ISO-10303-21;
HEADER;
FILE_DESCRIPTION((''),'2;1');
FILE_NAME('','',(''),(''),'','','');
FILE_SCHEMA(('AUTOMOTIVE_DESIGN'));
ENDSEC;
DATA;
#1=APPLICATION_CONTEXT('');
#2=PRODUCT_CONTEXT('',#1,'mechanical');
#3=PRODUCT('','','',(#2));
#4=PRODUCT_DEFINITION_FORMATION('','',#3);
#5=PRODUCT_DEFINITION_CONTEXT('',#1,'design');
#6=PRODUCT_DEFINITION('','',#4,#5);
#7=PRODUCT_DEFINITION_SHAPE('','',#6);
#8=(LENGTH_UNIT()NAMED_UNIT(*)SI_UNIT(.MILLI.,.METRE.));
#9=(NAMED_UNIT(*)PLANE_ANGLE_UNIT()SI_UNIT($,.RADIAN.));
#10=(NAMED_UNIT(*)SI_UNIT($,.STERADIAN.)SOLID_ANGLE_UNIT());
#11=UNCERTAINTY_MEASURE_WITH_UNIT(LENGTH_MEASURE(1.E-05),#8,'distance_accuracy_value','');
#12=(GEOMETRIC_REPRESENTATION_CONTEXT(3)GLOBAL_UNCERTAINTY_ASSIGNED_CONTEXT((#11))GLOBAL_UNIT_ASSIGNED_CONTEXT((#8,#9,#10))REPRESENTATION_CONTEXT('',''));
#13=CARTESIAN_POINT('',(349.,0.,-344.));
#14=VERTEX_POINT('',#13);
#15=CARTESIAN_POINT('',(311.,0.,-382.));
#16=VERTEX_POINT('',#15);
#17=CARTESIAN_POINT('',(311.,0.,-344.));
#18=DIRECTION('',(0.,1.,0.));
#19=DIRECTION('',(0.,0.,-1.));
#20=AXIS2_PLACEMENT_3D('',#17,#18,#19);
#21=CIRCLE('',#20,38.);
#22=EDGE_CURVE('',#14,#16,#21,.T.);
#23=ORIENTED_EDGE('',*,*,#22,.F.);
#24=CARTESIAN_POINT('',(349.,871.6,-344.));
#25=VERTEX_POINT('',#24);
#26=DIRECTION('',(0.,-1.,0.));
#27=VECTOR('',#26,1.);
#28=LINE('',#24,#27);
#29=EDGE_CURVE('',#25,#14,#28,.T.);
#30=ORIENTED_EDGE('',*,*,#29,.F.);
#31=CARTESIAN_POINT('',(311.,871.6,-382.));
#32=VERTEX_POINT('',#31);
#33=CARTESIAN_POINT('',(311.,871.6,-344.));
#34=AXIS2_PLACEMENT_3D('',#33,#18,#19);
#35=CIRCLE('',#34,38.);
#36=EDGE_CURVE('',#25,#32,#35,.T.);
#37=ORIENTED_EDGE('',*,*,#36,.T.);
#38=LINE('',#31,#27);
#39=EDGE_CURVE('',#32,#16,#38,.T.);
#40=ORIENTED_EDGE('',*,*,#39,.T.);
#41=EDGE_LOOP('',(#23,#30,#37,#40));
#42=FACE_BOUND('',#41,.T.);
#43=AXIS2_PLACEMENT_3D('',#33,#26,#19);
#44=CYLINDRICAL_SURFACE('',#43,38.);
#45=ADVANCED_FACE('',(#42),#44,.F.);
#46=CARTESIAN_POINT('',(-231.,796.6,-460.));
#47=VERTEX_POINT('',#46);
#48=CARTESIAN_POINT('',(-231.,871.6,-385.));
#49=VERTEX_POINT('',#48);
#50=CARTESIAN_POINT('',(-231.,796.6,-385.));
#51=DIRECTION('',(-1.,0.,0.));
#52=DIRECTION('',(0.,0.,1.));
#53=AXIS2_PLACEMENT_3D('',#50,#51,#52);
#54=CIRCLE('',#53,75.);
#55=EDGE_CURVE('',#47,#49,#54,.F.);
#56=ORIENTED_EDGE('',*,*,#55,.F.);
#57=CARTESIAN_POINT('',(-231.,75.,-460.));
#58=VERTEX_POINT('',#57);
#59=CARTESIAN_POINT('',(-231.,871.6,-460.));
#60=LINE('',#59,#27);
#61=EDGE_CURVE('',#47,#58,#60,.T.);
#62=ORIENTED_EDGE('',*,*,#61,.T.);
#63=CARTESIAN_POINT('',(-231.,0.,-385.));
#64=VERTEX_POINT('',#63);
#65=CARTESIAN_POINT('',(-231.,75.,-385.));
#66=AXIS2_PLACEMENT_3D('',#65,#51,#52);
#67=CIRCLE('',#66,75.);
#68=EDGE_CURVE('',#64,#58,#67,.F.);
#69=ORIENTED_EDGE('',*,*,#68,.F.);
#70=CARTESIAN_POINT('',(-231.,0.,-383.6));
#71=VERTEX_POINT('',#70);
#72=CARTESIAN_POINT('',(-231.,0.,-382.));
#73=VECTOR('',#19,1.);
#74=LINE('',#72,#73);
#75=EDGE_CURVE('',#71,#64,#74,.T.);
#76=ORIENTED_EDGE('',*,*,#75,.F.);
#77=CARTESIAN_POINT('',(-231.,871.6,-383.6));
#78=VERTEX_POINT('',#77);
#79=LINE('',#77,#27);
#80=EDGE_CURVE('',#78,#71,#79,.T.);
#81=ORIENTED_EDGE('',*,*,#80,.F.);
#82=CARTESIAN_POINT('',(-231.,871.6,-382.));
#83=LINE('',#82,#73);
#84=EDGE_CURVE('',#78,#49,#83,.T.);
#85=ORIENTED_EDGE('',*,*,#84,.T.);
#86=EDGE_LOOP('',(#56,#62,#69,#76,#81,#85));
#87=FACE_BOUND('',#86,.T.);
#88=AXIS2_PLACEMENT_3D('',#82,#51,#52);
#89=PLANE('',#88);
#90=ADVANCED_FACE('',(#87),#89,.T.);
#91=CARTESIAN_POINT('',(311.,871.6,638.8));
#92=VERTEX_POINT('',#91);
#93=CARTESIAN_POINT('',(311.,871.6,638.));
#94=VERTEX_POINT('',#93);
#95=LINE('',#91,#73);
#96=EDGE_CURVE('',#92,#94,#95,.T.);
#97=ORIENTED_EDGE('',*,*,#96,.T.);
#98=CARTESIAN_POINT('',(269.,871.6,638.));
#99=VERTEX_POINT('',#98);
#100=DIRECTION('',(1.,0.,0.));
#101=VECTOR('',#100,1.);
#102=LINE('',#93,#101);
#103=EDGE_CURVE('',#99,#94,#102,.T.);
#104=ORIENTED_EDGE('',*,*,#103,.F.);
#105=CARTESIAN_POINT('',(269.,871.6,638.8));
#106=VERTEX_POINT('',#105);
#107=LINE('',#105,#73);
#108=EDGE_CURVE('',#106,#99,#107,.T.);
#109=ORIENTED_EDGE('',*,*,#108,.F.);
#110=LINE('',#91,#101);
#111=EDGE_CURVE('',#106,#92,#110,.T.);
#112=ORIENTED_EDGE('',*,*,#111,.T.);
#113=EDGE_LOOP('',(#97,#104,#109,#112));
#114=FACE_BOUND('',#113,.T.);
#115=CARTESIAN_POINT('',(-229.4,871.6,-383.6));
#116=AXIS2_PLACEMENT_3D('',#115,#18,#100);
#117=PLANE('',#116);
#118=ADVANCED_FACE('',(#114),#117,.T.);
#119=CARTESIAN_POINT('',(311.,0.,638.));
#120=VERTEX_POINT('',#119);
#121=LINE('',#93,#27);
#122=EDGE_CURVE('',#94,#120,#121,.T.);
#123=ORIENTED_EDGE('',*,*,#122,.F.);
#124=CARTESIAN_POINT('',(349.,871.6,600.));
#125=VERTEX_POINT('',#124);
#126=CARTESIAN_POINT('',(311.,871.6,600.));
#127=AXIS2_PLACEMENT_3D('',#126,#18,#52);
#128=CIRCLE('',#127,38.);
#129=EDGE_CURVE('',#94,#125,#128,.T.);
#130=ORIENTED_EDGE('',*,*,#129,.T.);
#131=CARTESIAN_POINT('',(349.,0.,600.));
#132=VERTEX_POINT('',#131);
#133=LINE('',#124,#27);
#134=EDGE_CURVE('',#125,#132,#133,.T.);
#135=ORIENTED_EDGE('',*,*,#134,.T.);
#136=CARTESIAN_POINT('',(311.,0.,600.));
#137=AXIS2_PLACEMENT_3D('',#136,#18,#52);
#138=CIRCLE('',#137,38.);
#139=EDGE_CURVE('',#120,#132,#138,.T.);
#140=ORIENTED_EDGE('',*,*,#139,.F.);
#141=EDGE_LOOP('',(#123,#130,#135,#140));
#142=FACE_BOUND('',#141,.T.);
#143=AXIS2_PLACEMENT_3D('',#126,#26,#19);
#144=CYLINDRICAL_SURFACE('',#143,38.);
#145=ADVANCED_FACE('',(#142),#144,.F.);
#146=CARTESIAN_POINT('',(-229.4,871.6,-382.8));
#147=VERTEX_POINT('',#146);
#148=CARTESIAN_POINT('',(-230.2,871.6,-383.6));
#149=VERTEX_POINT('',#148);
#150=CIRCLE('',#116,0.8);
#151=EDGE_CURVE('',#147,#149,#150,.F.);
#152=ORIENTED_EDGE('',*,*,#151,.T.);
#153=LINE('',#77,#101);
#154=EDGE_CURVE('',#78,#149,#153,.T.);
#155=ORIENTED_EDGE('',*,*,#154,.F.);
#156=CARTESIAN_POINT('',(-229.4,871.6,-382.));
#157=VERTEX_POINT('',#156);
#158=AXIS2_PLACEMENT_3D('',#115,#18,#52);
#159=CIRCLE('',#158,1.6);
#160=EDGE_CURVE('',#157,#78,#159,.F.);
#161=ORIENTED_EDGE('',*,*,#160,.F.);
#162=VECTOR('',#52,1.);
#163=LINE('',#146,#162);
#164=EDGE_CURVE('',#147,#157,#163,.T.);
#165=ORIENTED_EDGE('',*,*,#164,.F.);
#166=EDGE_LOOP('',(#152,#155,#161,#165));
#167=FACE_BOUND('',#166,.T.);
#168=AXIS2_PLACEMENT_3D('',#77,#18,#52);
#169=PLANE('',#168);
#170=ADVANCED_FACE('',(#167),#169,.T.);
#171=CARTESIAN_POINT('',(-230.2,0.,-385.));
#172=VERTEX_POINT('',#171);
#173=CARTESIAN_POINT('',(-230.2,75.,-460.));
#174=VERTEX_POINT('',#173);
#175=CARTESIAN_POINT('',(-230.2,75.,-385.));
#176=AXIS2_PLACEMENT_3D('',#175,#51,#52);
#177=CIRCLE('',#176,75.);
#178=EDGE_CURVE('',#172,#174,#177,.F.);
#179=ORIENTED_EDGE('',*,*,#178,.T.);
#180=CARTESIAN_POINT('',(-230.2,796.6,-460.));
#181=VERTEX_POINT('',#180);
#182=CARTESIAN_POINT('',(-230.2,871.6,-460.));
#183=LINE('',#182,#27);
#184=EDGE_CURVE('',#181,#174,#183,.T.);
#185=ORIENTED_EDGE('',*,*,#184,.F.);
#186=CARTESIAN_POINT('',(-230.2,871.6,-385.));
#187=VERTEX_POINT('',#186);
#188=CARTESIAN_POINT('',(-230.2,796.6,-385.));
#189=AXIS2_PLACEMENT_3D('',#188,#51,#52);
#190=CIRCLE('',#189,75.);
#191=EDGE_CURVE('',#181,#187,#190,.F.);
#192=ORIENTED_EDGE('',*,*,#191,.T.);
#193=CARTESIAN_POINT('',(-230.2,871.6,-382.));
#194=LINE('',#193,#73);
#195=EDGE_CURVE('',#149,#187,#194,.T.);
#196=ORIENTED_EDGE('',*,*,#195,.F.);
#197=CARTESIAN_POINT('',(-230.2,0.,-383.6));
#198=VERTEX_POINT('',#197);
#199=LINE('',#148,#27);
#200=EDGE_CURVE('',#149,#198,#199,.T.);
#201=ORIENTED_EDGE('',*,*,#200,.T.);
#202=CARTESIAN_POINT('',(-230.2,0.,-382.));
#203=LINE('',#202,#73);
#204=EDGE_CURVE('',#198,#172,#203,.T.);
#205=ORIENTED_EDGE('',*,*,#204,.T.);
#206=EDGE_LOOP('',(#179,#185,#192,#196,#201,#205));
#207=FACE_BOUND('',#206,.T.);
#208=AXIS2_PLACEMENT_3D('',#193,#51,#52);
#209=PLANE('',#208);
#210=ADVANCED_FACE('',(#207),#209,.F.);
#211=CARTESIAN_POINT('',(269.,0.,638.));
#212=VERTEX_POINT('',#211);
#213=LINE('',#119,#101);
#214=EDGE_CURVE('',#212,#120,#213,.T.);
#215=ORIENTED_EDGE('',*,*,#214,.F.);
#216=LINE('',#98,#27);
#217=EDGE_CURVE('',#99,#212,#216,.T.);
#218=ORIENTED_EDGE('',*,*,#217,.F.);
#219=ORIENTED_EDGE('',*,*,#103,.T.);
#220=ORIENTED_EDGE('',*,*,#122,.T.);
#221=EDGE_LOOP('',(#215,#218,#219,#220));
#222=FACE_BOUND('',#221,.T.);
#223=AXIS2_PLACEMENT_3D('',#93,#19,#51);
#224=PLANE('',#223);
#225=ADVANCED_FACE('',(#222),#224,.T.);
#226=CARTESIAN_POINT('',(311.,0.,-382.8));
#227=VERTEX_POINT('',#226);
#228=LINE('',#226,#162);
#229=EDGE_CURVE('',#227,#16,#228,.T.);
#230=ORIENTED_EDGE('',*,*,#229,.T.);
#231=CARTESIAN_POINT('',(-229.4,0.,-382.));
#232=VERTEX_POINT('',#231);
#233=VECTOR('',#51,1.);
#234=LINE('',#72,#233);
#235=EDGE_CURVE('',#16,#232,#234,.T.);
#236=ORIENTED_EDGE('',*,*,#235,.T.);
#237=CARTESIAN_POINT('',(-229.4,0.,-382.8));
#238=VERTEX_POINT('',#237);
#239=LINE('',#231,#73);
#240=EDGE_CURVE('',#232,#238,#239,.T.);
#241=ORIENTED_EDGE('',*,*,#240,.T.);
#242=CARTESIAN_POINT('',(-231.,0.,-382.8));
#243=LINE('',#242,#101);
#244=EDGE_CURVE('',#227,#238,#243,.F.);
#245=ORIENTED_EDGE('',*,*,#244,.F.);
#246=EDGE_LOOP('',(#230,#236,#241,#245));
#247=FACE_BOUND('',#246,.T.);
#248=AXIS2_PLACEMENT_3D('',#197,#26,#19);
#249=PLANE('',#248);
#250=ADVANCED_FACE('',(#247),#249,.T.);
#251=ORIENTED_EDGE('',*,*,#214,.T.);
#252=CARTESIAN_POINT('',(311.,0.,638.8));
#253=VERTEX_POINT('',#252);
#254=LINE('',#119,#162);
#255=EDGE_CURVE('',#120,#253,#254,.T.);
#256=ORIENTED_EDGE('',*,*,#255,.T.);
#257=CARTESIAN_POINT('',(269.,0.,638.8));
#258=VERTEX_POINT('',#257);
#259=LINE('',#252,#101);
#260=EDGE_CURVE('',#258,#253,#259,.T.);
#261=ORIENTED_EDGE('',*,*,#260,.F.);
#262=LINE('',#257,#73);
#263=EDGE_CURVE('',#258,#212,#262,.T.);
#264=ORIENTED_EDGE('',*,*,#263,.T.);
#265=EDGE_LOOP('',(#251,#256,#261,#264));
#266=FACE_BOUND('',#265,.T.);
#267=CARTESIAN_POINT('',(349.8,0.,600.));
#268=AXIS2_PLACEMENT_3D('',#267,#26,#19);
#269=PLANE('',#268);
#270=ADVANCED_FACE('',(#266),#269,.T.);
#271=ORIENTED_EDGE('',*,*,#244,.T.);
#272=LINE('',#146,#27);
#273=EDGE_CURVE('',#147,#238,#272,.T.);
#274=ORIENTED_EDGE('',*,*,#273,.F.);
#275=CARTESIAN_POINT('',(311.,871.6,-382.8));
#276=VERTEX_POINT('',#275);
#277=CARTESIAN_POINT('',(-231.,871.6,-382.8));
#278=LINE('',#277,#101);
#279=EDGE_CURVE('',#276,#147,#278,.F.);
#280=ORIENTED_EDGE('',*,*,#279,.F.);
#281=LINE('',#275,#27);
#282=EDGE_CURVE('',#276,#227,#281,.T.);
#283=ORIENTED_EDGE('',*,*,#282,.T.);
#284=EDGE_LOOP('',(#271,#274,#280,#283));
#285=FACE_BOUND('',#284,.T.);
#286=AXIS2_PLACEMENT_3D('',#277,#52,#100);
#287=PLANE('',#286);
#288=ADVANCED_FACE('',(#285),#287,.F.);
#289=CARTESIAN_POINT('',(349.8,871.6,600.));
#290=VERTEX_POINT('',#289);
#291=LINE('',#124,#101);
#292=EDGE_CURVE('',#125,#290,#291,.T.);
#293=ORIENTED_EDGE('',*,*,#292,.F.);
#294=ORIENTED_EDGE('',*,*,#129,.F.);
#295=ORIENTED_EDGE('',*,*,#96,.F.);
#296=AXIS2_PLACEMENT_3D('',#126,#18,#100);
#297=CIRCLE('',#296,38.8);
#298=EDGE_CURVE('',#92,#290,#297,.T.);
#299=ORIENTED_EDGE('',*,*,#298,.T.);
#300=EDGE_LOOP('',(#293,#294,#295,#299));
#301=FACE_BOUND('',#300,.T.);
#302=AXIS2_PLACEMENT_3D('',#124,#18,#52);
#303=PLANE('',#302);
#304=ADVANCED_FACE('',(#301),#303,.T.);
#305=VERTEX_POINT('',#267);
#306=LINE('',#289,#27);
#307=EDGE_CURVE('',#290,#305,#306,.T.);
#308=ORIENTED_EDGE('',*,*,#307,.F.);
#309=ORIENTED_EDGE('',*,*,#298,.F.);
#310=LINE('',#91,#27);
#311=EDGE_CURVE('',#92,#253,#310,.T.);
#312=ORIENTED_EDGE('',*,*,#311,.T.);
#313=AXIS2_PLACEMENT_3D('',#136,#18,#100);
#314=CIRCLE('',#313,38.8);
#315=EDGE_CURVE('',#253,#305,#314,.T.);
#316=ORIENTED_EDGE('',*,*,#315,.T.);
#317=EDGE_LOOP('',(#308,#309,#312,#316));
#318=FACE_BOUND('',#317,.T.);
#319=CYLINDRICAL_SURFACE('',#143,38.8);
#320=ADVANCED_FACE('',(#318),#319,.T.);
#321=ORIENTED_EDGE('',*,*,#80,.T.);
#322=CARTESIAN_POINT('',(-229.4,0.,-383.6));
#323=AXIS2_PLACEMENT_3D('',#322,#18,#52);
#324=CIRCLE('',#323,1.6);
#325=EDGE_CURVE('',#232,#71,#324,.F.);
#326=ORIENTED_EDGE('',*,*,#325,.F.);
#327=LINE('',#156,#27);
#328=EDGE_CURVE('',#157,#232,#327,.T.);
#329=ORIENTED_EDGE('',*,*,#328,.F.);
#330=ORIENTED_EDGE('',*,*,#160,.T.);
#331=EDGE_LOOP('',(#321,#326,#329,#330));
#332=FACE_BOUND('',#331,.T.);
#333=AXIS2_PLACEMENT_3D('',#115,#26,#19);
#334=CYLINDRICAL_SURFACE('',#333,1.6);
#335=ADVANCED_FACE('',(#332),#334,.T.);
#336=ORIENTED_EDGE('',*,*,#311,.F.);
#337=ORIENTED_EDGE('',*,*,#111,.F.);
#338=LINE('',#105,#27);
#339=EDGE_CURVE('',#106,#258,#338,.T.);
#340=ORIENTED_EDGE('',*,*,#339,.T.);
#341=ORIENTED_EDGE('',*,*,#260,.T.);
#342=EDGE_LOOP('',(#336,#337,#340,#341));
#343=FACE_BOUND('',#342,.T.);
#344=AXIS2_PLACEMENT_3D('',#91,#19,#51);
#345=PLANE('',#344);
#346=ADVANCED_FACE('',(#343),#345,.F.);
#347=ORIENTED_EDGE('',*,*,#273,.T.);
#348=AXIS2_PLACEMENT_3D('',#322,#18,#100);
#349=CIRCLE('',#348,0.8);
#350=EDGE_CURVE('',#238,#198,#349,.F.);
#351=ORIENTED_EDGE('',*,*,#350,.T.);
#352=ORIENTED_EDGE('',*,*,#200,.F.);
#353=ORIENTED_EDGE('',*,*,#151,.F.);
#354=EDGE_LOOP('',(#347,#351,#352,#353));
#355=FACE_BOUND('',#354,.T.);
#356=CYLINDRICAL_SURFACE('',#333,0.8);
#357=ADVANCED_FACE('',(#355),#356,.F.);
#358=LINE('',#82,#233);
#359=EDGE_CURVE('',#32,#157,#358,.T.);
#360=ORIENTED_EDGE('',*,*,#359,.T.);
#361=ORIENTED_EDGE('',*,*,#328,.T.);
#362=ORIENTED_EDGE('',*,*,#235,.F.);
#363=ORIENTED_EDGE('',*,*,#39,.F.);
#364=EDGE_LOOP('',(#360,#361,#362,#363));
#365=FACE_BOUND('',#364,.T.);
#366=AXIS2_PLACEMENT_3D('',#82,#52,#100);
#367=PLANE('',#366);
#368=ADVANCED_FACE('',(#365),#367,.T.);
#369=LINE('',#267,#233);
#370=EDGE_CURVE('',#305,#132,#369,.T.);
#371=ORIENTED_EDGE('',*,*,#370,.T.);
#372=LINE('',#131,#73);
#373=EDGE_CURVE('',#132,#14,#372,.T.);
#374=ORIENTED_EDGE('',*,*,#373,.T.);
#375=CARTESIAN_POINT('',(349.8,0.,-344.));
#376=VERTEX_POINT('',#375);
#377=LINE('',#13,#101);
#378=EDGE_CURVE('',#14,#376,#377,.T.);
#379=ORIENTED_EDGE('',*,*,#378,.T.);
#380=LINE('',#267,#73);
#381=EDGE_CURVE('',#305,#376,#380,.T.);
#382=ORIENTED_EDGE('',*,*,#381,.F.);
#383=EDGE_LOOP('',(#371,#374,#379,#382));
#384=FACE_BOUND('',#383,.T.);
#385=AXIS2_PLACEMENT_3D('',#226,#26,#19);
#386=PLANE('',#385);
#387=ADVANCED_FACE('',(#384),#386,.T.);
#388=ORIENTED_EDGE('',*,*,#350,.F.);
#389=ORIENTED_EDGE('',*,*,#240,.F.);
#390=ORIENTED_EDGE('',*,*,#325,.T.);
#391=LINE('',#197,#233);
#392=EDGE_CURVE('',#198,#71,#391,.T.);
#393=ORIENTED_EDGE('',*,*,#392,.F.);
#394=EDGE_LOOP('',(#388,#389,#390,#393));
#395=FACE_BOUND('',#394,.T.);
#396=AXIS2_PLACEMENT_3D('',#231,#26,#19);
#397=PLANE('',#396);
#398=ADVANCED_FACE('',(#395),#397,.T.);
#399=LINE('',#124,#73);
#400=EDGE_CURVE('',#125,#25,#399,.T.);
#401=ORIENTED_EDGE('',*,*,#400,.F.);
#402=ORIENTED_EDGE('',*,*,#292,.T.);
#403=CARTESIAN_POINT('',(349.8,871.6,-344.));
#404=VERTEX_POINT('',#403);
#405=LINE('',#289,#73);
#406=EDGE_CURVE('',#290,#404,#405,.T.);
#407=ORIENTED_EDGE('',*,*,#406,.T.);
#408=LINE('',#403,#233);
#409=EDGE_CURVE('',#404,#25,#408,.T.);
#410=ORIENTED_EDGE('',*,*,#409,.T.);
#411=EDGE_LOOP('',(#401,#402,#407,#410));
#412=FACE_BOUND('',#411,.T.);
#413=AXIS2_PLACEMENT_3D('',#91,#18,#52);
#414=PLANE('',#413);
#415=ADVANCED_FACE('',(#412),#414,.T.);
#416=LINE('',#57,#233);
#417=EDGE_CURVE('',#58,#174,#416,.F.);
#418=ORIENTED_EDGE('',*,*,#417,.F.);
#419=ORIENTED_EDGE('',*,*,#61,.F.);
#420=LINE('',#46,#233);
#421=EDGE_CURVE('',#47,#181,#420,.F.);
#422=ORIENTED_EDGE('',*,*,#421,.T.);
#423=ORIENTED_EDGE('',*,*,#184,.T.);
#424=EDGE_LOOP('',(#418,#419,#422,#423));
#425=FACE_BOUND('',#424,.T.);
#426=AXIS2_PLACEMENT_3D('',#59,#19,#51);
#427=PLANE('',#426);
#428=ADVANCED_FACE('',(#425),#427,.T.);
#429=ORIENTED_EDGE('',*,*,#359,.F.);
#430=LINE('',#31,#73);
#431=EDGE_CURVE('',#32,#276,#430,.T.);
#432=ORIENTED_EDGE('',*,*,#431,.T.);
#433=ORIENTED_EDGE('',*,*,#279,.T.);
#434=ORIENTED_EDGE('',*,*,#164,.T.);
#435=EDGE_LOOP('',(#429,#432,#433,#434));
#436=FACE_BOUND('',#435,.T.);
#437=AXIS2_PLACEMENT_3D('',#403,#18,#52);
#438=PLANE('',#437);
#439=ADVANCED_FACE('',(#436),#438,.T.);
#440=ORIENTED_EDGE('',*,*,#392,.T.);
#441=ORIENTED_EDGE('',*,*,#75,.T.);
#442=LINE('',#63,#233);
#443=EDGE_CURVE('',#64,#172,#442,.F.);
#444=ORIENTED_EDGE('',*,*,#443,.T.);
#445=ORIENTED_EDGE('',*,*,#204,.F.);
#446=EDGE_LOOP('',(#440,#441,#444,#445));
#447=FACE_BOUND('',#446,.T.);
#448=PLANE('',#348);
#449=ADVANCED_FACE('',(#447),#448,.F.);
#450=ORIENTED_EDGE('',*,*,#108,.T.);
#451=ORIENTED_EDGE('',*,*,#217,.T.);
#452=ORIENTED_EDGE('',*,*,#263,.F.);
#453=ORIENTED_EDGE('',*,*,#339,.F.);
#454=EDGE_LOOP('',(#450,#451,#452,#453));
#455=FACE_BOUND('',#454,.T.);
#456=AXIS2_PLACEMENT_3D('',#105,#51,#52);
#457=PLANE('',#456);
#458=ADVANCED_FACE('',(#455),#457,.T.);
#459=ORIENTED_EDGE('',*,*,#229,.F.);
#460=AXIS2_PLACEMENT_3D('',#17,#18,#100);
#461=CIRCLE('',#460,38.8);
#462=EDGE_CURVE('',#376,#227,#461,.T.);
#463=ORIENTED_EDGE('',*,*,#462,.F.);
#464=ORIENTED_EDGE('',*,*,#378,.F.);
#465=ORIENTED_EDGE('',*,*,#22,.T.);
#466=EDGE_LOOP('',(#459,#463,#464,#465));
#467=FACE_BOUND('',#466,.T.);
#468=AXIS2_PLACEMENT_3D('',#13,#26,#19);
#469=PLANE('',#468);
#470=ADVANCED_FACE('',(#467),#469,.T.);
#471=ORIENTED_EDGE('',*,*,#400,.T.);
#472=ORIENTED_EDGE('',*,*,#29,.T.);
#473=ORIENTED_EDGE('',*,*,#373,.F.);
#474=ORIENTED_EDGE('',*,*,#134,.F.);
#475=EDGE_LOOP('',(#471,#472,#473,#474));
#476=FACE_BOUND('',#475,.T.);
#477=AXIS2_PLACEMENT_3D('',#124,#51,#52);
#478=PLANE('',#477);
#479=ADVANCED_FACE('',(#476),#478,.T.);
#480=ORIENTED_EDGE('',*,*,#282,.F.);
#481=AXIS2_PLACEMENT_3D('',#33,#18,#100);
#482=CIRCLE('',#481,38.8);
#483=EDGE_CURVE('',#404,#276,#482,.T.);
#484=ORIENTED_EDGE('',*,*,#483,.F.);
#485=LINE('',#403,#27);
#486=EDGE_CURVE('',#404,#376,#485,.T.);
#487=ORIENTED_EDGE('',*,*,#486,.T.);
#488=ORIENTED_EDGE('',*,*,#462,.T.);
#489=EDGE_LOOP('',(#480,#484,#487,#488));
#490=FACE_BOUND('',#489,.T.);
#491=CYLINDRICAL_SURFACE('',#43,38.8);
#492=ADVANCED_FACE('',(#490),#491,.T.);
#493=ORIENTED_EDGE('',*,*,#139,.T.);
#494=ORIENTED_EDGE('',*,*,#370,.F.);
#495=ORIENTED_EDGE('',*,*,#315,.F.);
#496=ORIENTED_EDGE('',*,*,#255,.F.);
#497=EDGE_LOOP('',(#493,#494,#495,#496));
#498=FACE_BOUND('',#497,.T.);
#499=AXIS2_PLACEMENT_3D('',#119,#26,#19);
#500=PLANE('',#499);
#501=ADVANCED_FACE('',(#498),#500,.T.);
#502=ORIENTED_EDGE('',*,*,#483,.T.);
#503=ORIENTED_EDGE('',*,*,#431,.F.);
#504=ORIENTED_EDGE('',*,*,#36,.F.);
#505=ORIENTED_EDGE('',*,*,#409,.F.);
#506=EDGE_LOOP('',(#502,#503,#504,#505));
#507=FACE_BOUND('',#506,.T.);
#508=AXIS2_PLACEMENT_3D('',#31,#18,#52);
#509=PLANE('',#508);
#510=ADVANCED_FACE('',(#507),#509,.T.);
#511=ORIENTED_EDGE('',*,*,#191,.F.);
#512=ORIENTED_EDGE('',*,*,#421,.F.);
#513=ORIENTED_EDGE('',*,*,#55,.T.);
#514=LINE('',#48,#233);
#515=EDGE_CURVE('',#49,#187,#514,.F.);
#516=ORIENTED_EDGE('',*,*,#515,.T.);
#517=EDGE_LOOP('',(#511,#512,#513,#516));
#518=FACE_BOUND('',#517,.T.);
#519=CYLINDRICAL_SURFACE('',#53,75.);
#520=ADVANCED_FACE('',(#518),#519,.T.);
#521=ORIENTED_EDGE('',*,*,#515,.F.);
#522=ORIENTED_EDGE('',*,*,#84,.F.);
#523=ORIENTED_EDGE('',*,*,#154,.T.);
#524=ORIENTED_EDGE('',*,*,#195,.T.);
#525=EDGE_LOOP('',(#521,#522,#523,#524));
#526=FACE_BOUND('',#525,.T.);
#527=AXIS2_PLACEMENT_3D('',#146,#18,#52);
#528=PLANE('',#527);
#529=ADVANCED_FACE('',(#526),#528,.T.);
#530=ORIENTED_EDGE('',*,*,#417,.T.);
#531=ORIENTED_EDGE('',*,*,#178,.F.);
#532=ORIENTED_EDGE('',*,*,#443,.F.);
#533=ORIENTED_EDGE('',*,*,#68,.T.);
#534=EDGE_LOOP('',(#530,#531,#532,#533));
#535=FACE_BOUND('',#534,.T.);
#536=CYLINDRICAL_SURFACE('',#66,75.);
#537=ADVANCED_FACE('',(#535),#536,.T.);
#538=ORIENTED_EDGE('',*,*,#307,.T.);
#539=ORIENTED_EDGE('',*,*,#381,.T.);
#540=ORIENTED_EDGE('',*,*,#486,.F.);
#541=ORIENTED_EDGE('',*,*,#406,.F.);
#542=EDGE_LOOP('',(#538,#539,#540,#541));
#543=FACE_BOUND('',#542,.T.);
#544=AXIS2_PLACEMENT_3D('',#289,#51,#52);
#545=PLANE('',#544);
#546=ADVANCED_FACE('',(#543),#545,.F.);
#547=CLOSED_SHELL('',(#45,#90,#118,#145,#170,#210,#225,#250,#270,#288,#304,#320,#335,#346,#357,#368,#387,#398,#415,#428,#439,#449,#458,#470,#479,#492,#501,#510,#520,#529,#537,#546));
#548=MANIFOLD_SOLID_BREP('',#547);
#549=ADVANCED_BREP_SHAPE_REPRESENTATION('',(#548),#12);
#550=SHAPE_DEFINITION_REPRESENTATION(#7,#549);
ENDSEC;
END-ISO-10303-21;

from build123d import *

# Parameters (mm, degrees)
BASE_FLANGE1_DEPTH = 871.6
CUT_EXTRUDE1_DEPTH = 10


# Sheet-metal steps are written as plain solids
with BuildPart() as part:
    # Sketch1 → Base-Flange1 (new body)
    with BuildSketch(Plane(origin=(0, 0, 0), x_dir=(1, 0, 0), z_dir=(0, 1, 0))):
        with BuildLine():
            Line((-231, 460), (-231, 383.6))
            ThreePointArc((-231, 383.6), (-230.53137085, 382.46862915), (-229.4, 382))
            Line((-229.4, 382), (311, 382))
            ThreePointArc((311, 382), (337.870057685, 370.870057685), (349, 344))
            Line((349, 344), (349, -600))
            ThreePointArc((349, -600), (337.870057685, -626.870057685), (311, -638))
            Line((311, -638), (269, -638))
            Line((269, -638), (269, -638.8))
            Line((269, -638.8), (311, -638.8))
            ThreePointArc((311, -638.8), (338.43574311, -627.43574311), (349.8, -600))
            Line((349.8, -600), (349.8, 344))
            ThreePointArc((349.8, 344), (338.43574311, 371.43574311), (311, 382.8))
            Line((311, 382.8), (-229.4, 382.8))
            ThreePointArc((-229.4, 382.8), (-229.965685425, 383.034314575), (-230.2, 383.6))
            Line((-230.2, 383.6), (-230.2, 460))
            Line((-230.2, 460), (-231, 460))
        make_face()
    extrude(amount=BASE_FLANGE1_DEPTH)

    # Sketch4 → Cut-Extrude1 (cut)
    with BuildSketch(Plane(origin=(-230.2, 0, 0), x_dir=(0, 0, -1), z_dir=(1, 0, 0))):
        with BuildLine():
            Line((460, 871.6), (385, 871.6))
            ThreePointArc((385, 871.6), (438.033008589, 849.633008589), (460, 796.6))
            Line((460, 796.6), (460, 871.6))
        make_face()
        with BuildLine():
            Line((460, 0), (385, 0))
            ThreePointArc((385, 0), (438.033008589, 21.966991411), (460, 75))
            Line((460, 75), (460, 0))
        make_face()
    extrude(amount=-CUT_EXTRUDE1_DEPTH, mode=Mode.SUBTRACT)


solid = part.part
